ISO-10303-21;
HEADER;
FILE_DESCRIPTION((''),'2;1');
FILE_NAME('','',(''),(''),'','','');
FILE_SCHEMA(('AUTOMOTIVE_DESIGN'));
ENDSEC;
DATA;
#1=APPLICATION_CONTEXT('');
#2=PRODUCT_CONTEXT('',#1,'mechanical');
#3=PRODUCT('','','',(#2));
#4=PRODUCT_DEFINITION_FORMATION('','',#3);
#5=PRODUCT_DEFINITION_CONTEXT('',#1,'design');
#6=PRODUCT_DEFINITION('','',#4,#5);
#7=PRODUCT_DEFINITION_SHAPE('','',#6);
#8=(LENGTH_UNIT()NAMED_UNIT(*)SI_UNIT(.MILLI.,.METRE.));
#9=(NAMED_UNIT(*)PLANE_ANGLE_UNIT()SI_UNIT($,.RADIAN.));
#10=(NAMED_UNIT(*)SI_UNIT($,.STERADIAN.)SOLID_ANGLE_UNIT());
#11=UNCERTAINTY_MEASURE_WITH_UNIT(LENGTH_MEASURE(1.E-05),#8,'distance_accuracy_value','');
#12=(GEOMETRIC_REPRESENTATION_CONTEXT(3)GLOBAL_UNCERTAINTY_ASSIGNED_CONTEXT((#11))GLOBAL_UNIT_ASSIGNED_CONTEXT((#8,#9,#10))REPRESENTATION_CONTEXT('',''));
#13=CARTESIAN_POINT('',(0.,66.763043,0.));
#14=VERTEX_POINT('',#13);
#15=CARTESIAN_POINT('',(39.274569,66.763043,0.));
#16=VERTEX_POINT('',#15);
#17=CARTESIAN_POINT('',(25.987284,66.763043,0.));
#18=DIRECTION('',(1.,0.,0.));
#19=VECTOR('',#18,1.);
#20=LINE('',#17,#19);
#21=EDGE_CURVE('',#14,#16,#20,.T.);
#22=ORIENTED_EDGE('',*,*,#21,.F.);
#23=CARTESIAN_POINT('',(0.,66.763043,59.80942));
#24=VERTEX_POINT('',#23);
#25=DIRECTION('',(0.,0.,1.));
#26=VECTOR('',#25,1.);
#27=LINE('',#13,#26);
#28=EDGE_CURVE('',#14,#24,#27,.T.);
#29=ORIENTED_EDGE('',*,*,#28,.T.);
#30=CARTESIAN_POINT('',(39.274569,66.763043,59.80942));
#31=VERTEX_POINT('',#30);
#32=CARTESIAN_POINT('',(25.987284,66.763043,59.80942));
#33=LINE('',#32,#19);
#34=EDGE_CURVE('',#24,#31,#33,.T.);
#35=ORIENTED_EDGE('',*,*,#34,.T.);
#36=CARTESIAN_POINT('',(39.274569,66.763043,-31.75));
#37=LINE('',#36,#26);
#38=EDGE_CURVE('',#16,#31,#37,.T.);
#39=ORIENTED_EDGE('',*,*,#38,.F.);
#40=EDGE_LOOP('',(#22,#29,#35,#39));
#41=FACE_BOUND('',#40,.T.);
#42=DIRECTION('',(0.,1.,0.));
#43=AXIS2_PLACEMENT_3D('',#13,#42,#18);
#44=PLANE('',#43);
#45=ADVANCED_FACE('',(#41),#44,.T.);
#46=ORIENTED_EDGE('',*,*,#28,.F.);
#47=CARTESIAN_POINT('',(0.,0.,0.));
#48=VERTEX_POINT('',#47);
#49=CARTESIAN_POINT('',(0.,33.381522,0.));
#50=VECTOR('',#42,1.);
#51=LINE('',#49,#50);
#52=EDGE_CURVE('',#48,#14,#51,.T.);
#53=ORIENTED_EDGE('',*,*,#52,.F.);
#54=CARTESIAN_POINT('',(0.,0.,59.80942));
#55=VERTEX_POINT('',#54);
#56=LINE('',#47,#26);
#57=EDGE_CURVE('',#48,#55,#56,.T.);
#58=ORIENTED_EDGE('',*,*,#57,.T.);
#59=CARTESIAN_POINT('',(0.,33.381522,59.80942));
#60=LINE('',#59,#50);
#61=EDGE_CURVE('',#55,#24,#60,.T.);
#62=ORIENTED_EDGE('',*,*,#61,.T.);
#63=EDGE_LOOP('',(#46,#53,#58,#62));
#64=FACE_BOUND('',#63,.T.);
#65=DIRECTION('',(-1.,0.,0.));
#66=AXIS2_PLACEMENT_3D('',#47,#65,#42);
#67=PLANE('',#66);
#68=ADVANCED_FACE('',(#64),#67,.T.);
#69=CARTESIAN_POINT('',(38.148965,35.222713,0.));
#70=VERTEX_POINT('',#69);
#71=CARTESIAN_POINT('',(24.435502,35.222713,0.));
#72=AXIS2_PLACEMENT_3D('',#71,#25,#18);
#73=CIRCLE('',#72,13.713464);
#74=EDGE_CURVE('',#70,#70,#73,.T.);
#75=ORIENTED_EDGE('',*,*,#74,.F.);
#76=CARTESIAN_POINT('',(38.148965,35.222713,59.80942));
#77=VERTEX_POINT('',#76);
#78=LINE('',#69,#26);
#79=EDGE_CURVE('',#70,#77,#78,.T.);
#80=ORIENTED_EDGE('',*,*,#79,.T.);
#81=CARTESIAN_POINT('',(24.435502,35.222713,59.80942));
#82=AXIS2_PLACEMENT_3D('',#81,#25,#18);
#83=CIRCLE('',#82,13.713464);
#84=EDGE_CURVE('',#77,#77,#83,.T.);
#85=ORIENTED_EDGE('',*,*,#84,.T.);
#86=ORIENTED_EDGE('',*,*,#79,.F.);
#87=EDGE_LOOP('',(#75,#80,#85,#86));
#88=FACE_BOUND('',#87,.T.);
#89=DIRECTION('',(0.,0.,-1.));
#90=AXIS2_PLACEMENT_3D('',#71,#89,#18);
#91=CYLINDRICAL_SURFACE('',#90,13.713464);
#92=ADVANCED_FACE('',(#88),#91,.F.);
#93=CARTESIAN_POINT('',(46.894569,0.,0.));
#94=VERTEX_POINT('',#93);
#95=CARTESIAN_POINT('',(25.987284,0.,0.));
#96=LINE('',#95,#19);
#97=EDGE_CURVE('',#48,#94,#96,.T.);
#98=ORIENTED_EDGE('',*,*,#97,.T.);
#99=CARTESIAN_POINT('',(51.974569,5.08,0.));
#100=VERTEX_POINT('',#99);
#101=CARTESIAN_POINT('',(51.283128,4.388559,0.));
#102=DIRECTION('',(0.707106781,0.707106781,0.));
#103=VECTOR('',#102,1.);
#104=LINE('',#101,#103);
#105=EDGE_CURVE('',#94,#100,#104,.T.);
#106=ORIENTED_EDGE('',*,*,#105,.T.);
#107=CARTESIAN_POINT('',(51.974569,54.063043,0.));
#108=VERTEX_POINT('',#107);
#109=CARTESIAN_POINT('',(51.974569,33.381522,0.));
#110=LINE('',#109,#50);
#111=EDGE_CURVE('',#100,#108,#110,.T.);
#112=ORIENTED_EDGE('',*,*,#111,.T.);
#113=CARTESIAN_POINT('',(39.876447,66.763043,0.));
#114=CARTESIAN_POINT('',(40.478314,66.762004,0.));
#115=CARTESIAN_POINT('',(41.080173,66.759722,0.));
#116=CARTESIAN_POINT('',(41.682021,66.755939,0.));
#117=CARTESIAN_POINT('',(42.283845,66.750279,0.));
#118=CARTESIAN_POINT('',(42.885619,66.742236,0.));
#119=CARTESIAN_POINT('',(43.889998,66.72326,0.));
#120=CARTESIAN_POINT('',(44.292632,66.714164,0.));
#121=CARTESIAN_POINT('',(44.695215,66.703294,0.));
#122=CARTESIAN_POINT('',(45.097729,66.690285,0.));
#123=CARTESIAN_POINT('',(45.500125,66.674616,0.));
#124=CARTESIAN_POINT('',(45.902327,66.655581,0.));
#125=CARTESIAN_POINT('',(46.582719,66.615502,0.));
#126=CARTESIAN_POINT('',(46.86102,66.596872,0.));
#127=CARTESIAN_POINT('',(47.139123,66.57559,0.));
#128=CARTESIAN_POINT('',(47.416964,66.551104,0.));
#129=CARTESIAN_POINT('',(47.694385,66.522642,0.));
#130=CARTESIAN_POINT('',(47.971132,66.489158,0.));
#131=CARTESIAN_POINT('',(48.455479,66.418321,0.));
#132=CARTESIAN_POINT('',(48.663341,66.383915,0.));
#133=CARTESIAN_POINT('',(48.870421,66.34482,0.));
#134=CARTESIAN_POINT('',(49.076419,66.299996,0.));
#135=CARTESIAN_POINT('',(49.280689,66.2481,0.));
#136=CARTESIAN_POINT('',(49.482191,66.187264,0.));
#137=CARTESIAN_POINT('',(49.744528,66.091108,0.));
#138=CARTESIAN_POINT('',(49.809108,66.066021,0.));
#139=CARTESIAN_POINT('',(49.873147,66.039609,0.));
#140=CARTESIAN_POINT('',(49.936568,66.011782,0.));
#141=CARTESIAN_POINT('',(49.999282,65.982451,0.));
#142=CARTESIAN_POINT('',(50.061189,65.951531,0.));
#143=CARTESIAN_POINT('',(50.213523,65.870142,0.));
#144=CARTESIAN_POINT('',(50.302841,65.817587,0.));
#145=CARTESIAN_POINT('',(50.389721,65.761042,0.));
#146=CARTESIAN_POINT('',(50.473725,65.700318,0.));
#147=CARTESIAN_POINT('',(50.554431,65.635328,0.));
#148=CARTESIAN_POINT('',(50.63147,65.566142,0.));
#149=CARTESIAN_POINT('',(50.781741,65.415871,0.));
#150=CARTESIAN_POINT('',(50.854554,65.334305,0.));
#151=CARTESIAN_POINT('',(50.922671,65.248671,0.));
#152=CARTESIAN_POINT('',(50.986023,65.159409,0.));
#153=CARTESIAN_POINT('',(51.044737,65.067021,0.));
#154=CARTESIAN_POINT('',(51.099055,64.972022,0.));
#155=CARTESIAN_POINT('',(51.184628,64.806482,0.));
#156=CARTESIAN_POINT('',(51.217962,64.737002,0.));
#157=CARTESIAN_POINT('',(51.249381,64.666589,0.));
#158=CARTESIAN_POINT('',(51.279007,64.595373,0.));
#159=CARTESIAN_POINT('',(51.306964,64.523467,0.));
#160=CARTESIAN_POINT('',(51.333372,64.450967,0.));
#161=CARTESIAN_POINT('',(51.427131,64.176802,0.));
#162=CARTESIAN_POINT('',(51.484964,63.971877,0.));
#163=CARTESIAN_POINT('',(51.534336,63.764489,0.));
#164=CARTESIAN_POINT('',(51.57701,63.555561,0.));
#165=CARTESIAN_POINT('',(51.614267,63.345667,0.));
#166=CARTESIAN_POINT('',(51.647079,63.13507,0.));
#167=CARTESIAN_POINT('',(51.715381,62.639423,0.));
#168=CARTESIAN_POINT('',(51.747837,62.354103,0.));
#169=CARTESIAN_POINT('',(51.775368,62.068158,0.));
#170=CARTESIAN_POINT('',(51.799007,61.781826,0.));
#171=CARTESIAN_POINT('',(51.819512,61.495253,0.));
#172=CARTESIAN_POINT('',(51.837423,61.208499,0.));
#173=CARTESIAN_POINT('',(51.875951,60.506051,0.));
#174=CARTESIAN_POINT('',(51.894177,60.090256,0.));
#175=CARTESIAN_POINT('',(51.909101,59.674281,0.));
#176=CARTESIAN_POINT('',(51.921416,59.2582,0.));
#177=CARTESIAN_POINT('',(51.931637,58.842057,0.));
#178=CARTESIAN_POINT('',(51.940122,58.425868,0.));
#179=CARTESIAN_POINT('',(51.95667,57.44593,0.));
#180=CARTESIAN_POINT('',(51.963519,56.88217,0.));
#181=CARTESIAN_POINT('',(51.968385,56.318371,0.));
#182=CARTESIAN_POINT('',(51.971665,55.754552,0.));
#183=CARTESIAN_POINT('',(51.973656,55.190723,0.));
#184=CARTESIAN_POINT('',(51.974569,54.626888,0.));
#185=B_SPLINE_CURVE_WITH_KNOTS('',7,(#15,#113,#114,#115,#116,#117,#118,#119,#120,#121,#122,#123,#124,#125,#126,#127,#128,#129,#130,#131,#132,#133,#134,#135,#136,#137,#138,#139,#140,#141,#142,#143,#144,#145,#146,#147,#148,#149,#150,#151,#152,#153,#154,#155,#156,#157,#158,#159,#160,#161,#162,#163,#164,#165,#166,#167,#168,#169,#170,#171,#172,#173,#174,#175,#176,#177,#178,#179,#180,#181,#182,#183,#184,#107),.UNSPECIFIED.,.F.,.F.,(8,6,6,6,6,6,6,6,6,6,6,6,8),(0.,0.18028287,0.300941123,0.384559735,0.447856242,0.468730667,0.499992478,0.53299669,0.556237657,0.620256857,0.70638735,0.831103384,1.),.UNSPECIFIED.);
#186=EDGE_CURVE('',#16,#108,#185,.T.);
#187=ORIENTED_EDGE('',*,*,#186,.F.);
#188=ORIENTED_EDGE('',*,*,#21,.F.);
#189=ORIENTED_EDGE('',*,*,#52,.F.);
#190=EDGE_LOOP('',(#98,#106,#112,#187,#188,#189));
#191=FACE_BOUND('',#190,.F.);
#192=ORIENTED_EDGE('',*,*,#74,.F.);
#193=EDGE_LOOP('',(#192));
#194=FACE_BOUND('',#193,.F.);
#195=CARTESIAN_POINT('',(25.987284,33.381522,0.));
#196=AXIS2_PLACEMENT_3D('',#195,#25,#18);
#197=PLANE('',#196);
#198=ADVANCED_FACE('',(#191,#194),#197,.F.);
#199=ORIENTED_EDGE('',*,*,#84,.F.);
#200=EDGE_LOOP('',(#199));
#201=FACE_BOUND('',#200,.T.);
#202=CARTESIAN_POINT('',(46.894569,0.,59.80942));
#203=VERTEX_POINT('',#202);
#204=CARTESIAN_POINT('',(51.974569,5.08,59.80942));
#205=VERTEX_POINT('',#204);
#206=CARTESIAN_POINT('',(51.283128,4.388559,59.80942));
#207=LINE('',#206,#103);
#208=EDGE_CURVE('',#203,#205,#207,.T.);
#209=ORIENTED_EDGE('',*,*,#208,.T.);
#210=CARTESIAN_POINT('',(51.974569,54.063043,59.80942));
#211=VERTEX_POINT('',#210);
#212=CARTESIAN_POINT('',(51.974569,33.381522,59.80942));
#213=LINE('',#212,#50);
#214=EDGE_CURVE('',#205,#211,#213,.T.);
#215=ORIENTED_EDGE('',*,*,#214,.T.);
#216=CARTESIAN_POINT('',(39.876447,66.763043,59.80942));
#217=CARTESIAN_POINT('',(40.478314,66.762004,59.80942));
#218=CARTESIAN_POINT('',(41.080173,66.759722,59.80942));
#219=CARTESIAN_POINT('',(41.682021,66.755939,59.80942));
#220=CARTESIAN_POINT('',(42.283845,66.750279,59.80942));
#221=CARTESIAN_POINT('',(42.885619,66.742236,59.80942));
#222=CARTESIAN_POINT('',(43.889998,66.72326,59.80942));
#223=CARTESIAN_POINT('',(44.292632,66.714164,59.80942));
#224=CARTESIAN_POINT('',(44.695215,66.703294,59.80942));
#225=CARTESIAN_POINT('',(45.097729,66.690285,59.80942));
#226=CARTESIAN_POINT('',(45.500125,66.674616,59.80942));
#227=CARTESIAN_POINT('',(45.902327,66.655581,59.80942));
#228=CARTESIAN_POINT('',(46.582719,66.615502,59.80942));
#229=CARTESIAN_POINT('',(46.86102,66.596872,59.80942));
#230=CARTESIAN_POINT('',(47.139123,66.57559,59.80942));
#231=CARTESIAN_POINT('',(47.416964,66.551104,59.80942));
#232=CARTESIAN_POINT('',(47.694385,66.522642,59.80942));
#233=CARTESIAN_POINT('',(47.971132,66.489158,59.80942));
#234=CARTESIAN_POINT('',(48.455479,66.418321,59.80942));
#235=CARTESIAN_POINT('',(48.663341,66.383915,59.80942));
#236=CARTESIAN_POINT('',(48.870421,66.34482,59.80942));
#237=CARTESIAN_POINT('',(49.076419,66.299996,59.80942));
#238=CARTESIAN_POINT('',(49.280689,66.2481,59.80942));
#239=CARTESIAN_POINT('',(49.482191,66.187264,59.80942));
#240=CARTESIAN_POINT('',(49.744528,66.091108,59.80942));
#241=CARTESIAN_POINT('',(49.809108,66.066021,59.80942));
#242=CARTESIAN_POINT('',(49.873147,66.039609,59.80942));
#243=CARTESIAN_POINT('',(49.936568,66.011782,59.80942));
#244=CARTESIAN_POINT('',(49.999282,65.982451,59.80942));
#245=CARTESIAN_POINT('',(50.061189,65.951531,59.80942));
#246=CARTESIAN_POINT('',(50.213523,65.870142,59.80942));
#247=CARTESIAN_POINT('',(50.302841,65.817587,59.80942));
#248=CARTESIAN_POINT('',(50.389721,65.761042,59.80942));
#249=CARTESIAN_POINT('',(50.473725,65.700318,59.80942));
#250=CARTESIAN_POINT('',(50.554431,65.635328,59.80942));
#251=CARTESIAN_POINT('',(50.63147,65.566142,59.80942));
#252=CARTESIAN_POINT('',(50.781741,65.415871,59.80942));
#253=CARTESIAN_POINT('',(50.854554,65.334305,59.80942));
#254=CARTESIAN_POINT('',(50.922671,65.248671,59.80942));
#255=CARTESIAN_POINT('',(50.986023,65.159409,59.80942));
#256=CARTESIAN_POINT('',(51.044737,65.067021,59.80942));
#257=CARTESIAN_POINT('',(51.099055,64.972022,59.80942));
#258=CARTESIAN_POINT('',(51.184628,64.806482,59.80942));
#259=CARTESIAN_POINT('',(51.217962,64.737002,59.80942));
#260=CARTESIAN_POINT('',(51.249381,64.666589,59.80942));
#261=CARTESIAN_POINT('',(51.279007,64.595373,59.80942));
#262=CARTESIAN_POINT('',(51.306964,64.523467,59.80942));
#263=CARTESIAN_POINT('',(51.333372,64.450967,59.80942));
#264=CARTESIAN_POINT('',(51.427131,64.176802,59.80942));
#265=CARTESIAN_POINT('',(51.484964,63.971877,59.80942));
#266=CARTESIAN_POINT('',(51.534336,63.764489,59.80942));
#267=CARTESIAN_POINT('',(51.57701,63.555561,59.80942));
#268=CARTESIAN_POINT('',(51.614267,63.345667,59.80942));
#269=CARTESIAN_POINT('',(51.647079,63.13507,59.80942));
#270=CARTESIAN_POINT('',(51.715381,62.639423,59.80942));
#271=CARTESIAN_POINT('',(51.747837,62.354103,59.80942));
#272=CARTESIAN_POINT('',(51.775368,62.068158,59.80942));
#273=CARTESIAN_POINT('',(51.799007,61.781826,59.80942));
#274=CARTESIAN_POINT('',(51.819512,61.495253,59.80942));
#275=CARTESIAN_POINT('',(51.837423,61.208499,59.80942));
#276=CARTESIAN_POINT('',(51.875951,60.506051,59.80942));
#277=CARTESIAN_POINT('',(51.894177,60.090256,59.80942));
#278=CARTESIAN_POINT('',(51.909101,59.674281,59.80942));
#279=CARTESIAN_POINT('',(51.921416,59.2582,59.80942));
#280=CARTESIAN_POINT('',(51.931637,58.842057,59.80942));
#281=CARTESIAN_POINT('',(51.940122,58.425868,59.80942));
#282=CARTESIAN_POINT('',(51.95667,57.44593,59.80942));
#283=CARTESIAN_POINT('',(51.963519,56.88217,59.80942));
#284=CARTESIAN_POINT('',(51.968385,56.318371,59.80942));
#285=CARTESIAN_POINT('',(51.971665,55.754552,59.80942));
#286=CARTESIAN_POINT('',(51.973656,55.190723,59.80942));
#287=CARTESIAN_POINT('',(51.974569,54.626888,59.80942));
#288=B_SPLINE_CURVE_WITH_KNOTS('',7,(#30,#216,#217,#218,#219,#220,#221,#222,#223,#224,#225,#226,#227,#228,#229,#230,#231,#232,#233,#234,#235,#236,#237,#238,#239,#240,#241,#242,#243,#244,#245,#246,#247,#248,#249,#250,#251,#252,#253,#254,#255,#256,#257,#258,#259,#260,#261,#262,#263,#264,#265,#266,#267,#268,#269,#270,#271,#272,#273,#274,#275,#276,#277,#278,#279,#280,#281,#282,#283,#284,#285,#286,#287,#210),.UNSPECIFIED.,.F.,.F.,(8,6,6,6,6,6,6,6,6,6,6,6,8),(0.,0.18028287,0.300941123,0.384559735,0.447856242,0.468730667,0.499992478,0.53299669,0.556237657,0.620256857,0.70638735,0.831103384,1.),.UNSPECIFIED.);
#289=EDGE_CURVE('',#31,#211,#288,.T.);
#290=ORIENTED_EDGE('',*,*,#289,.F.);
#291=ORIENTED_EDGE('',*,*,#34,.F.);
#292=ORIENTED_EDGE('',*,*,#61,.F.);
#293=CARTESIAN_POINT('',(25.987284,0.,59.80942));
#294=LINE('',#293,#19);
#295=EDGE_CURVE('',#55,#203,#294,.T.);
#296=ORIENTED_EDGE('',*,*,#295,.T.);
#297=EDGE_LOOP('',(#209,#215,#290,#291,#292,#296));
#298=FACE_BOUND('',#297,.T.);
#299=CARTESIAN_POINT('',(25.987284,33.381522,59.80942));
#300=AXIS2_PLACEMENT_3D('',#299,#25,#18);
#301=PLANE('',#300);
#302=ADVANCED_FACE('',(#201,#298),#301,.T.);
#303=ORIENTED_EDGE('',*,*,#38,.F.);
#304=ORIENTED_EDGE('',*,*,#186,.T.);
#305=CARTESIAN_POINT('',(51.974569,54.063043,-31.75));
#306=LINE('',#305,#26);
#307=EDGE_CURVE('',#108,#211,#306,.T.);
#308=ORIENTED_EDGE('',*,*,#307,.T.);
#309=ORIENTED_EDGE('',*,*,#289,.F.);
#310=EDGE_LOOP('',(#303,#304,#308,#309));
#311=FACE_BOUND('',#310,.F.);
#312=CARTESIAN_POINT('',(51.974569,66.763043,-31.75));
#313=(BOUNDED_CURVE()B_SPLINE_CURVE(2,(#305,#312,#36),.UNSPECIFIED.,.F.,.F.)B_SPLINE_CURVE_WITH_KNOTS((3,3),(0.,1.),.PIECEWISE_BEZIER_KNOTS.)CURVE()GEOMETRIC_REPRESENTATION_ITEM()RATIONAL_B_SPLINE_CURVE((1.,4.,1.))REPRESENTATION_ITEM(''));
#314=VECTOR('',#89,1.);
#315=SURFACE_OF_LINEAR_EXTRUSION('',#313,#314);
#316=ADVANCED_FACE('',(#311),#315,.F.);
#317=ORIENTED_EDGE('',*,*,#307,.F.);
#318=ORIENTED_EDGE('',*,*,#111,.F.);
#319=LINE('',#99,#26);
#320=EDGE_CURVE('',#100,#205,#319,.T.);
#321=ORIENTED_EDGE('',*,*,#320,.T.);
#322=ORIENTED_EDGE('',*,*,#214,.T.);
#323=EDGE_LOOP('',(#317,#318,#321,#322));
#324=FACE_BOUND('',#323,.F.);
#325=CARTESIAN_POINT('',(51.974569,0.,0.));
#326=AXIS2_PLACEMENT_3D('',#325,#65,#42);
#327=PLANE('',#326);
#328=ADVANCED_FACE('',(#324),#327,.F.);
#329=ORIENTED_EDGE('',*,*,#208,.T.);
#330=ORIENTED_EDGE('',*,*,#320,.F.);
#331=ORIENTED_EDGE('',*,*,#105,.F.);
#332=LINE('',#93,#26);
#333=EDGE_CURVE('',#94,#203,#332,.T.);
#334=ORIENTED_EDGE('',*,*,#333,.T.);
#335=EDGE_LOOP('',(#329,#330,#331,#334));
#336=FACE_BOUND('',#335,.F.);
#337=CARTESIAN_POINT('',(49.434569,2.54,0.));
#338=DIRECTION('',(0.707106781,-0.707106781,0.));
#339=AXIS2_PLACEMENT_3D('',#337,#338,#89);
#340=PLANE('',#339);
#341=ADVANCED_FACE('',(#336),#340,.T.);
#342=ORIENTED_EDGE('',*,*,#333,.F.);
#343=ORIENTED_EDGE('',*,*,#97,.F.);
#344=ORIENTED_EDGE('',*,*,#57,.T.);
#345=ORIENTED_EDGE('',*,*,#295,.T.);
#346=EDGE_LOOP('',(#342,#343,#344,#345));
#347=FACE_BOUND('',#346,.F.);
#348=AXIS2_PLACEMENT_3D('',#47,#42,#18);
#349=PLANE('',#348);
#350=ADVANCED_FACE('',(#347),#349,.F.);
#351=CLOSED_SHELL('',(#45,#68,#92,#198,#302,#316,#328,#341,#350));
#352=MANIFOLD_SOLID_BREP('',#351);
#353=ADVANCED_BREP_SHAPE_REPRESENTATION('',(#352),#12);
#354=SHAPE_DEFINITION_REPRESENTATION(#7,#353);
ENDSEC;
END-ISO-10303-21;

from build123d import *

# Parameters (mm, degrees)
F0_W        = 51.974568516
F0_H        = 66.7630434036
F0_R        = 13.7134635275
F1_DEPTH    = 59.80942
F2_SIZE     = 5.08
F3_T1_DEPTH = 123.30942


# Not quite as in the source:
# - a fillet or chamfer that OpenCascade refuses, or shapes differently, is made with other operations: its cross-section is extruded or revolved along the edge and cut away or added


with BuildPart() as f1:
    # F0 (on Top) → F1 (new body)
    with BuildSketch(Plane.XY):
        with Locations((25.987284258, 33.3815217018)):
            Rectangle(F0_W, F0_H)
        with Locations((24.4355015457, 35.2227129042)):
            Circle(F0_R, mode=Mode.SUBTRACT)
    extrude(amount=F1_DEPTH)

    # F2
    f2_edges = [f1.edges().sort_by_distance(p)[0] for p in [
        (51.974569, 0, 29.90471),
    ]]
    chamfer(f2_edges, length=F2_SIZE)

    # F3: fillet of radius 12.7 on 1 edges, made by hand

    # F3_s2 → F3_t1 (cut)
    with BuildSketch(Plane.XY.offset(-31.75)):
        with BuildLine():
            add(Edge.make_bspline(
                [(51.974568516, 54.0630434036), (51.974568516, 66.7630434036), (39.274568516, 66.7630434036)],
                knots=[0, 0, 0, 1, 1, 1], degree=2, weights=[1, 4, 1]))
            Line((39.274568516, 66.7630434036), (51.974568516, 66.7630434036))
            Line((51.974568516, 66.7630434036), (51.974568516, 54.0630434036))
        make_face()
    extrude(amount=F3_T1_DEPTH, mode=Mode.SUBTRACT)


solid = f1.part
